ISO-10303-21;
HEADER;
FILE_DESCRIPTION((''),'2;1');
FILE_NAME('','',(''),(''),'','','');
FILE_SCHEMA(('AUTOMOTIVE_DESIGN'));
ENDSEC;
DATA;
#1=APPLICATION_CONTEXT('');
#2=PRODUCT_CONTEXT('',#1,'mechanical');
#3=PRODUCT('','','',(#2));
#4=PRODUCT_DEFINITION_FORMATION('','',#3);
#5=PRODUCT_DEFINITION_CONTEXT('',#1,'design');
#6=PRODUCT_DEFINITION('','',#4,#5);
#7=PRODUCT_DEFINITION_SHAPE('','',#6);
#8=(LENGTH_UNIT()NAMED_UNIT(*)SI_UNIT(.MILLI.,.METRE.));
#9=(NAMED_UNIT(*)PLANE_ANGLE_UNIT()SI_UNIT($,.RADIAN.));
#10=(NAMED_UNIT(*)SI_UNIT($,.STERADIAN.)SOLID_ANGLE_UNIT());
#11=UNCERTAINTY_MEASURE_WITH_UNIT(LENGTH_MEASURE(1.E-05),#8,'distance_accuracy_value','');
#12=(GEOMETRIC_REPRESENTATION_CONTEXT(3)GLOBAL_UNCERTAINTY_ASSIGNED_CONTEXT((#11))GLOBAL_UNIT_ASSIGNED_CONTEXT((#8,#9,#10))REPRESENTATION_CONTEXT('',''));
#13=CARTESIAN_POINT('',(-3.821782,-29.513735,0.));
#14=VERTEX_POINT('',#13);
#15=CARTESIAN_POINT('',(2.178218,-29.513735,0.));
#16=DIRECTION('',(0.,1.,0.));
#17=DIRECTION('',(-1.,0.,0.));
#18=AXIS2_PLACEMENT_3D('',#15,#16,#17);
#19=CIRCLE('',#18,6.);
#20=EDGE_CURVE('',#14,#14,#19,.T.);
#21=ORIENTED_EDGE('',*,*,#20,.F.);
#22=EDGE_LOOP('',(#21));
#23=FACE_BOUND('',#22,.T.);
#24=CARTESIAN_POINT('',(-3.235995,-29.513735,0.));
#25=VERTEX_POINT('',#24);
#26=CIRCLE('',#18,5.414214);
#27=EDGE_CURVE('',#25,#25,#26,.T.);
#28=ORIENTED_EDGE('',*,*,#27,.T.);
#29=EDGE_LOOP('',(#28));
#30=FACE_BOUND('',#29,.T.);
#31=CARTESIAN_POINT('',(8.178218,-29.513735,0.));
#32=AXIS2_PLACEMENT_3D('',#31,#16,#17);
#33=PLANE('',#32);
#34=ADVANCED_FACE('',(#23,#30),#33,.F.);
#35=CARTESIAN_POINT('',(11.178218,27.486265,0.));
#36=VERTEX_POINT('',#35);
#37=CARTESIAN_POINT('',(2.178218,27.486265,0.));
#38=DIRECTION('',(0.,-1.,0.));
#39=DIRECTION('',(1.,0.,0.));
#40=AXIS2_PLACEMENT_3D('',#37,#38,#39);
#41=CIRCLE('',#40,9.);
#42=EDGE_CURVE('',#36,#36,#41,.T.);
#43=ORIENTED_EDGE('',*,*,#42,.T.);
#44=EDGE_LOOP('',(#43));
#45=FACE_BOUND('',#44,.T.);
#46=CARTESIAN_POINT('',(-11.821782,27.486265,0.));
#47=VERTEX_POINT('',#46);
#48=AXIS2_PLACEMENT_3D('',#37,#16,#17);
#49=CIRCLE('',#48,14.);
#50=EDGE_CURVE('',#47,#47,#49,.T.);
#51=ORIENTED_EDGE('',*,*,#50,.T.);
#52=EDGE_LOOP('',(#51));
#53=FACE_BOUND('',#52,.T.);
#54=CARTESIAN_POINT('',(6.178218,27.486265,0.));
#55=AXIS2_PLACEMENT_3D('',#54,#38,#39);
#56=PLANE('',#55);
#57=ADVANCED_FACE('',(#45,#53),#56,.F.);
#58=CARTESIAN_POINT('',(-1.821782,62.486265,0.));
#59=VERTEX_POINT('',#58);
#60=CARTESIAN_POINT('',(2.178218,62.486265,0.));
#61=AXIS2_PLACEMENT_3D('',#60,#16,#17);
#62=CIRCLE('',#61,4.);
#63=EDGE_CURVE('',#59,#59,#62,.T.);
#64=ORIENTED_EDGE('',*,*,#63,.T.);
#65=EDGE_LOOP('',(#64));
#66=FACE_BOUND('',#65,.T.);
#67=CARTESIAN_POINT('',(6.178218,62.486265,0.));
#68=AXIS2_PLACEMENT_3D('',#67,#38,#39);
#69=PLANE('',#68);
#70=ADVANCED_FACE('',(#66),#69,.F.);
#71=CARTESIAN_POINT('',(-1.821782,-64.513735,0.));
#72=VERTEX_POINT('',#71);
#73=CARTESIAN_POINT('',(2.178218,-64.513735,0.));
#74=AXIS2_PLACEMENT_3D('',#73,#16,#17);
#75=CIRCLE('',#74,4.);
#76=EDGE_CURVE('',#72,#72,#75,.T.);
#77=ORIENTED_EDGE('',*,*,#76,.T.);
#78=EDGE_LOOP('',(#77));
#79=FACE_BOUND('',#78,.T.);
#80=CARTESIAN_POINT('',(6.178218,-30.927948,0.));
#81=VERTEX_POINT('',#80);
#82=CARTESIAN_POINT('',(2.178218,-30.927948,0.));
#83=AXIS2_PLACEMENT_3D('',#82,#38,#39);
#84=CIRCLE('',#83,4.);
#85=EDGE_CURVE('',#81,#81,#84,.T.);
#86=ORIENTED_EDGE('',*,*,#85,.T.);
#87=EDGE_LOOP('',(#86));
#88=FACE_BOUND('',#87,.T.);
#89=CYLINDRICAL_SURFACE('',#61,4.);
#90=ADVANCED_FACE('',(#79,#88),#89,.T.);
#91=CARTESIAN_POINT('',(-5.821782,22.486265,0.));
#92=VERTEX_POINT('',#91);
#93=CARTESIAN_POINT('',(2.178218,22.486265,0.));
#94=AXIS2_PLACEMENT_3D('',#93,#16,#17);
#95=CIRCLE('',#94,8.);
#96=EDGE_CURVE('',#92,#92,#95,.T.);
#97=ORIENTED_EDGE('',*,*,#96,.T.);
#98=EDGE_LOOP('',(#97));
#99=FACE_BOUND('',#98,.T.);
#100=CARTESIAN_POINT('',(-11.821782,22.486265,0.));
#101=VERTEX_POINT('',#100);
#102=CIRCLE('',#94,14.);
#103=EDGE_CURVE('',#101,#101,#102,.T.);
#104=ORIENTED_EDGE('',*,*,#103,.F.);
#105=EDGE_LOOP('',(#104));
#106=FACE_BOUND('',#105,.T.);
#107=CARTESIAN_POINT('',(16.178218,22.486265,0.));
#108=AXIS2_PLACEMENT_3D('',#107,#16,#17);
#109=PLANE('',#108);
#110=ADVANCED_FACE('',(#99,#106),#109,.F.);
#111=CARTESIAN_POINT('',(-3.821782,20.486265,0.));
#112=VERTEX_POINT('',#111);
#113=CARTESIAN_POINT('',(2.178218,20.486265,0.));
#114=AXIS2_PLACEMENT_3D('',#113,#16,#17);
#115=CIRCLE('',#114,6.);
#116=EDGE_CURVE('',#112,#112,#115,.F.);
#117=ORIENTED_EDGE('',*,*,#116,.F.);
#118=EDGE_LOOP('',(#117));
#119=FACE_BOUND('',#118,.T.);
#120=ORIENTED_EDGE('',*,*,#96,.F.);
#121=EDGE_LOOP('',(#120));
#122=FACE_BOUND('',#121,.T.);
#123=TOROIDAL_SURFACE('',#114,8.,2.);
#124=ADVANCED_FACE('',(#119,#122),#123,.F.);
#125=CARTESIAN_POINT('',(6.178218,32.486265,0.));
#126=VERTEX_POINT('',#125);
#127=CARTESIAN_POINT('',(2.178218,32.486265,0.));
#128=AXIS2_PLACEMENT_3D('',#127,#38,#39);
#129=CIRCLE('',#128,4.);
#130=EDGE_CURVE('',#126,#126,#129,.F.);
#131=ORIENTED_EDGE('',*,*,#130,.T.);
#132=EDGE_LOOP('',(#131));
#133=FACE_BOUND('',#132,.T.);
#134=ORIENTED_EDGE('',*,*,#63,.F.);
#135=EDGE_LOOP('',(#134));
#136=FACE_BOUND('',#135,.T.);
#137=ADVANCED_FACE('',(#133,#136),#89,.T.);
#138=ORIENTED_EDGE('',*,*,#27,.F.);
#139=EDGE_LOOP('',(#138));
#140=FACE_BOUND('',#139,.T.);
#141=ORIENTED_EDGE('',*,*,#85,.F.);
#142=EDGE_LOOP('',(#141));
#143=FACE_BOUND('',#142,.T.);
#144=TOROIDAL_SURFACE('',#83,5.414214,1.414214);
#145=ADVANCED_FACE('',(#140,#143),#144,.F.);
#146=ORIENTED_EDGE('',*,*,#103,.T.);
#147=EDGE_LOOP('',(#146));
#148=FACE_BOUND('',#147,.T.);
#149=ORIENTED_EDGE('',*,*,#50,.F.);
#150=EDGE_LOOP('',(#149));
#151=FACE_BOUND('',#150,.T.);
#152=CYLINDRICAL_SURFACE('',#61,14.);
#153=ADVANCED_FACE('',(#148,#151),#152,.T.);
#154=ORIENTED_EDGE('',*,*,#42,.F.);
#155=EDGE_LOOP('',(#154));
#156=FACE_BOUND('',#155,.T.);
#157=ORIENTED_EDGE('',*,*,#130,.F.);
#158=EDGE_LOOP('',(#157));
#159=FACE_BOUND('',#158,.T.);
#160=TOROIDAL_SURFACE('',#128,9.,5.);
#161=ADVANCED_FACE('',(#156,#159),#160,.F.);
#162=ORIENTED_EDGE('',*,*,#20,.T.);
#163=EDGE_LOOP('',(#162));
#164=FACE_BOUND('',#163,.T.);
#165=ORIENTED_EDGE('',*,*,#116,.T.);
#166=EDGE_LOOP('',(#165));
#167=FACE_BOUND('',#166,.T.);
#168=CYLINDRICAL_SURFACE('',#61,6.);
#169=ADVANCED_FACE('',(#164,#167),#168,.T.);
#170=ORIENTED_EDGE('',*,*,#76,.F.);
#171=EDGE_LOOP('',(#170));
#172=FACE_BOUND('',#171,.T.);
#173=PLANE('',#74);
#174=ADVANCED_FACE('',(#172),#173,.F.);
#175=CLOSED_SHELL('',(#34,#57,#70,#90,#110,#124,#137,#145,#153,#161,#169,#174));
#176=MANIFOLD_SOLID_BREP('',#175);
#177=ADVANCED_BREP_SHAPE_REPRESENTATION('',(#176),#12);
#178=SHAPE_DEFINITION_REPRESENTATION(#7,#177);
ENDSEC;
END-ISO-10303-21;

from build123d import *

# Parameters (mm, degrees)
FILLET1_R = 5
FILLET2_R = 2


with BuildPart() as part:
    # Sketch1 → Revolve1 (revolve)
    with BuildSketch(Plane.XY, mode=Mode.PRIVATE) as revolve1_sk:
        Polygon((6.178218081, 62.486265198), (6.178218081, 27.486265198), (16.178218081, 27.486265198), (16.178218081, 22.486265198), (8.178218081, 22.486265198), (8.178218081, -29.513734802), (6.178218081, -29.513734802), (6.178218081, -64.513734802), (2.178218081, -64.513734802), (2.178218081, 62.486265198), align=None)
    revolve(revolve1_sk.sketch.rotate(Axis((2.178218081, 62.486265198, 0), (0, -1, 0)), 180), axis=Axis((2.178218081, 62.486265198, 0), (0, -1, 0)))

    # Fillet1
    fillet1_edges = [part.edges().sort_by_distance(p)[0] for p in [
        (6.178218081, 27.486265198, 0),
    ]]
    fillet(fillet1_edges, radius=FILLET1_R)

    # Fillet2
    fillet2_edges = [part.edges().sort_by_distance(p)[0] for p in [
        (8.178218081, 22.486265198, 0),
    ]]
    fillet(fillet2_edges, radius=FILLET2_R)

    # Fillet3: read off the stored shape, not the designer's step
    # Fillet3 outline → Fillet3 (revolve)
    with BuildSketch(Plane(origin=(2.178218081, 0, 0), x_dir=(1, 0, 0), z_dir=(0, 0, 1))):
        with BuildLine():
            Line((4, -29.513734802), (4, -30.927948365))
            ThreePointArc((4, -30.927948365), (4.414213562, -29.927948365), (5.414213562, -29.513734802))
            Line((5.414213562, -29.513734802), (4, -29.513734802))
        make_face()
    revolve(axis=Axis((2.178218081, 0, 0), (0, 1, 0)))


solid = part.part
